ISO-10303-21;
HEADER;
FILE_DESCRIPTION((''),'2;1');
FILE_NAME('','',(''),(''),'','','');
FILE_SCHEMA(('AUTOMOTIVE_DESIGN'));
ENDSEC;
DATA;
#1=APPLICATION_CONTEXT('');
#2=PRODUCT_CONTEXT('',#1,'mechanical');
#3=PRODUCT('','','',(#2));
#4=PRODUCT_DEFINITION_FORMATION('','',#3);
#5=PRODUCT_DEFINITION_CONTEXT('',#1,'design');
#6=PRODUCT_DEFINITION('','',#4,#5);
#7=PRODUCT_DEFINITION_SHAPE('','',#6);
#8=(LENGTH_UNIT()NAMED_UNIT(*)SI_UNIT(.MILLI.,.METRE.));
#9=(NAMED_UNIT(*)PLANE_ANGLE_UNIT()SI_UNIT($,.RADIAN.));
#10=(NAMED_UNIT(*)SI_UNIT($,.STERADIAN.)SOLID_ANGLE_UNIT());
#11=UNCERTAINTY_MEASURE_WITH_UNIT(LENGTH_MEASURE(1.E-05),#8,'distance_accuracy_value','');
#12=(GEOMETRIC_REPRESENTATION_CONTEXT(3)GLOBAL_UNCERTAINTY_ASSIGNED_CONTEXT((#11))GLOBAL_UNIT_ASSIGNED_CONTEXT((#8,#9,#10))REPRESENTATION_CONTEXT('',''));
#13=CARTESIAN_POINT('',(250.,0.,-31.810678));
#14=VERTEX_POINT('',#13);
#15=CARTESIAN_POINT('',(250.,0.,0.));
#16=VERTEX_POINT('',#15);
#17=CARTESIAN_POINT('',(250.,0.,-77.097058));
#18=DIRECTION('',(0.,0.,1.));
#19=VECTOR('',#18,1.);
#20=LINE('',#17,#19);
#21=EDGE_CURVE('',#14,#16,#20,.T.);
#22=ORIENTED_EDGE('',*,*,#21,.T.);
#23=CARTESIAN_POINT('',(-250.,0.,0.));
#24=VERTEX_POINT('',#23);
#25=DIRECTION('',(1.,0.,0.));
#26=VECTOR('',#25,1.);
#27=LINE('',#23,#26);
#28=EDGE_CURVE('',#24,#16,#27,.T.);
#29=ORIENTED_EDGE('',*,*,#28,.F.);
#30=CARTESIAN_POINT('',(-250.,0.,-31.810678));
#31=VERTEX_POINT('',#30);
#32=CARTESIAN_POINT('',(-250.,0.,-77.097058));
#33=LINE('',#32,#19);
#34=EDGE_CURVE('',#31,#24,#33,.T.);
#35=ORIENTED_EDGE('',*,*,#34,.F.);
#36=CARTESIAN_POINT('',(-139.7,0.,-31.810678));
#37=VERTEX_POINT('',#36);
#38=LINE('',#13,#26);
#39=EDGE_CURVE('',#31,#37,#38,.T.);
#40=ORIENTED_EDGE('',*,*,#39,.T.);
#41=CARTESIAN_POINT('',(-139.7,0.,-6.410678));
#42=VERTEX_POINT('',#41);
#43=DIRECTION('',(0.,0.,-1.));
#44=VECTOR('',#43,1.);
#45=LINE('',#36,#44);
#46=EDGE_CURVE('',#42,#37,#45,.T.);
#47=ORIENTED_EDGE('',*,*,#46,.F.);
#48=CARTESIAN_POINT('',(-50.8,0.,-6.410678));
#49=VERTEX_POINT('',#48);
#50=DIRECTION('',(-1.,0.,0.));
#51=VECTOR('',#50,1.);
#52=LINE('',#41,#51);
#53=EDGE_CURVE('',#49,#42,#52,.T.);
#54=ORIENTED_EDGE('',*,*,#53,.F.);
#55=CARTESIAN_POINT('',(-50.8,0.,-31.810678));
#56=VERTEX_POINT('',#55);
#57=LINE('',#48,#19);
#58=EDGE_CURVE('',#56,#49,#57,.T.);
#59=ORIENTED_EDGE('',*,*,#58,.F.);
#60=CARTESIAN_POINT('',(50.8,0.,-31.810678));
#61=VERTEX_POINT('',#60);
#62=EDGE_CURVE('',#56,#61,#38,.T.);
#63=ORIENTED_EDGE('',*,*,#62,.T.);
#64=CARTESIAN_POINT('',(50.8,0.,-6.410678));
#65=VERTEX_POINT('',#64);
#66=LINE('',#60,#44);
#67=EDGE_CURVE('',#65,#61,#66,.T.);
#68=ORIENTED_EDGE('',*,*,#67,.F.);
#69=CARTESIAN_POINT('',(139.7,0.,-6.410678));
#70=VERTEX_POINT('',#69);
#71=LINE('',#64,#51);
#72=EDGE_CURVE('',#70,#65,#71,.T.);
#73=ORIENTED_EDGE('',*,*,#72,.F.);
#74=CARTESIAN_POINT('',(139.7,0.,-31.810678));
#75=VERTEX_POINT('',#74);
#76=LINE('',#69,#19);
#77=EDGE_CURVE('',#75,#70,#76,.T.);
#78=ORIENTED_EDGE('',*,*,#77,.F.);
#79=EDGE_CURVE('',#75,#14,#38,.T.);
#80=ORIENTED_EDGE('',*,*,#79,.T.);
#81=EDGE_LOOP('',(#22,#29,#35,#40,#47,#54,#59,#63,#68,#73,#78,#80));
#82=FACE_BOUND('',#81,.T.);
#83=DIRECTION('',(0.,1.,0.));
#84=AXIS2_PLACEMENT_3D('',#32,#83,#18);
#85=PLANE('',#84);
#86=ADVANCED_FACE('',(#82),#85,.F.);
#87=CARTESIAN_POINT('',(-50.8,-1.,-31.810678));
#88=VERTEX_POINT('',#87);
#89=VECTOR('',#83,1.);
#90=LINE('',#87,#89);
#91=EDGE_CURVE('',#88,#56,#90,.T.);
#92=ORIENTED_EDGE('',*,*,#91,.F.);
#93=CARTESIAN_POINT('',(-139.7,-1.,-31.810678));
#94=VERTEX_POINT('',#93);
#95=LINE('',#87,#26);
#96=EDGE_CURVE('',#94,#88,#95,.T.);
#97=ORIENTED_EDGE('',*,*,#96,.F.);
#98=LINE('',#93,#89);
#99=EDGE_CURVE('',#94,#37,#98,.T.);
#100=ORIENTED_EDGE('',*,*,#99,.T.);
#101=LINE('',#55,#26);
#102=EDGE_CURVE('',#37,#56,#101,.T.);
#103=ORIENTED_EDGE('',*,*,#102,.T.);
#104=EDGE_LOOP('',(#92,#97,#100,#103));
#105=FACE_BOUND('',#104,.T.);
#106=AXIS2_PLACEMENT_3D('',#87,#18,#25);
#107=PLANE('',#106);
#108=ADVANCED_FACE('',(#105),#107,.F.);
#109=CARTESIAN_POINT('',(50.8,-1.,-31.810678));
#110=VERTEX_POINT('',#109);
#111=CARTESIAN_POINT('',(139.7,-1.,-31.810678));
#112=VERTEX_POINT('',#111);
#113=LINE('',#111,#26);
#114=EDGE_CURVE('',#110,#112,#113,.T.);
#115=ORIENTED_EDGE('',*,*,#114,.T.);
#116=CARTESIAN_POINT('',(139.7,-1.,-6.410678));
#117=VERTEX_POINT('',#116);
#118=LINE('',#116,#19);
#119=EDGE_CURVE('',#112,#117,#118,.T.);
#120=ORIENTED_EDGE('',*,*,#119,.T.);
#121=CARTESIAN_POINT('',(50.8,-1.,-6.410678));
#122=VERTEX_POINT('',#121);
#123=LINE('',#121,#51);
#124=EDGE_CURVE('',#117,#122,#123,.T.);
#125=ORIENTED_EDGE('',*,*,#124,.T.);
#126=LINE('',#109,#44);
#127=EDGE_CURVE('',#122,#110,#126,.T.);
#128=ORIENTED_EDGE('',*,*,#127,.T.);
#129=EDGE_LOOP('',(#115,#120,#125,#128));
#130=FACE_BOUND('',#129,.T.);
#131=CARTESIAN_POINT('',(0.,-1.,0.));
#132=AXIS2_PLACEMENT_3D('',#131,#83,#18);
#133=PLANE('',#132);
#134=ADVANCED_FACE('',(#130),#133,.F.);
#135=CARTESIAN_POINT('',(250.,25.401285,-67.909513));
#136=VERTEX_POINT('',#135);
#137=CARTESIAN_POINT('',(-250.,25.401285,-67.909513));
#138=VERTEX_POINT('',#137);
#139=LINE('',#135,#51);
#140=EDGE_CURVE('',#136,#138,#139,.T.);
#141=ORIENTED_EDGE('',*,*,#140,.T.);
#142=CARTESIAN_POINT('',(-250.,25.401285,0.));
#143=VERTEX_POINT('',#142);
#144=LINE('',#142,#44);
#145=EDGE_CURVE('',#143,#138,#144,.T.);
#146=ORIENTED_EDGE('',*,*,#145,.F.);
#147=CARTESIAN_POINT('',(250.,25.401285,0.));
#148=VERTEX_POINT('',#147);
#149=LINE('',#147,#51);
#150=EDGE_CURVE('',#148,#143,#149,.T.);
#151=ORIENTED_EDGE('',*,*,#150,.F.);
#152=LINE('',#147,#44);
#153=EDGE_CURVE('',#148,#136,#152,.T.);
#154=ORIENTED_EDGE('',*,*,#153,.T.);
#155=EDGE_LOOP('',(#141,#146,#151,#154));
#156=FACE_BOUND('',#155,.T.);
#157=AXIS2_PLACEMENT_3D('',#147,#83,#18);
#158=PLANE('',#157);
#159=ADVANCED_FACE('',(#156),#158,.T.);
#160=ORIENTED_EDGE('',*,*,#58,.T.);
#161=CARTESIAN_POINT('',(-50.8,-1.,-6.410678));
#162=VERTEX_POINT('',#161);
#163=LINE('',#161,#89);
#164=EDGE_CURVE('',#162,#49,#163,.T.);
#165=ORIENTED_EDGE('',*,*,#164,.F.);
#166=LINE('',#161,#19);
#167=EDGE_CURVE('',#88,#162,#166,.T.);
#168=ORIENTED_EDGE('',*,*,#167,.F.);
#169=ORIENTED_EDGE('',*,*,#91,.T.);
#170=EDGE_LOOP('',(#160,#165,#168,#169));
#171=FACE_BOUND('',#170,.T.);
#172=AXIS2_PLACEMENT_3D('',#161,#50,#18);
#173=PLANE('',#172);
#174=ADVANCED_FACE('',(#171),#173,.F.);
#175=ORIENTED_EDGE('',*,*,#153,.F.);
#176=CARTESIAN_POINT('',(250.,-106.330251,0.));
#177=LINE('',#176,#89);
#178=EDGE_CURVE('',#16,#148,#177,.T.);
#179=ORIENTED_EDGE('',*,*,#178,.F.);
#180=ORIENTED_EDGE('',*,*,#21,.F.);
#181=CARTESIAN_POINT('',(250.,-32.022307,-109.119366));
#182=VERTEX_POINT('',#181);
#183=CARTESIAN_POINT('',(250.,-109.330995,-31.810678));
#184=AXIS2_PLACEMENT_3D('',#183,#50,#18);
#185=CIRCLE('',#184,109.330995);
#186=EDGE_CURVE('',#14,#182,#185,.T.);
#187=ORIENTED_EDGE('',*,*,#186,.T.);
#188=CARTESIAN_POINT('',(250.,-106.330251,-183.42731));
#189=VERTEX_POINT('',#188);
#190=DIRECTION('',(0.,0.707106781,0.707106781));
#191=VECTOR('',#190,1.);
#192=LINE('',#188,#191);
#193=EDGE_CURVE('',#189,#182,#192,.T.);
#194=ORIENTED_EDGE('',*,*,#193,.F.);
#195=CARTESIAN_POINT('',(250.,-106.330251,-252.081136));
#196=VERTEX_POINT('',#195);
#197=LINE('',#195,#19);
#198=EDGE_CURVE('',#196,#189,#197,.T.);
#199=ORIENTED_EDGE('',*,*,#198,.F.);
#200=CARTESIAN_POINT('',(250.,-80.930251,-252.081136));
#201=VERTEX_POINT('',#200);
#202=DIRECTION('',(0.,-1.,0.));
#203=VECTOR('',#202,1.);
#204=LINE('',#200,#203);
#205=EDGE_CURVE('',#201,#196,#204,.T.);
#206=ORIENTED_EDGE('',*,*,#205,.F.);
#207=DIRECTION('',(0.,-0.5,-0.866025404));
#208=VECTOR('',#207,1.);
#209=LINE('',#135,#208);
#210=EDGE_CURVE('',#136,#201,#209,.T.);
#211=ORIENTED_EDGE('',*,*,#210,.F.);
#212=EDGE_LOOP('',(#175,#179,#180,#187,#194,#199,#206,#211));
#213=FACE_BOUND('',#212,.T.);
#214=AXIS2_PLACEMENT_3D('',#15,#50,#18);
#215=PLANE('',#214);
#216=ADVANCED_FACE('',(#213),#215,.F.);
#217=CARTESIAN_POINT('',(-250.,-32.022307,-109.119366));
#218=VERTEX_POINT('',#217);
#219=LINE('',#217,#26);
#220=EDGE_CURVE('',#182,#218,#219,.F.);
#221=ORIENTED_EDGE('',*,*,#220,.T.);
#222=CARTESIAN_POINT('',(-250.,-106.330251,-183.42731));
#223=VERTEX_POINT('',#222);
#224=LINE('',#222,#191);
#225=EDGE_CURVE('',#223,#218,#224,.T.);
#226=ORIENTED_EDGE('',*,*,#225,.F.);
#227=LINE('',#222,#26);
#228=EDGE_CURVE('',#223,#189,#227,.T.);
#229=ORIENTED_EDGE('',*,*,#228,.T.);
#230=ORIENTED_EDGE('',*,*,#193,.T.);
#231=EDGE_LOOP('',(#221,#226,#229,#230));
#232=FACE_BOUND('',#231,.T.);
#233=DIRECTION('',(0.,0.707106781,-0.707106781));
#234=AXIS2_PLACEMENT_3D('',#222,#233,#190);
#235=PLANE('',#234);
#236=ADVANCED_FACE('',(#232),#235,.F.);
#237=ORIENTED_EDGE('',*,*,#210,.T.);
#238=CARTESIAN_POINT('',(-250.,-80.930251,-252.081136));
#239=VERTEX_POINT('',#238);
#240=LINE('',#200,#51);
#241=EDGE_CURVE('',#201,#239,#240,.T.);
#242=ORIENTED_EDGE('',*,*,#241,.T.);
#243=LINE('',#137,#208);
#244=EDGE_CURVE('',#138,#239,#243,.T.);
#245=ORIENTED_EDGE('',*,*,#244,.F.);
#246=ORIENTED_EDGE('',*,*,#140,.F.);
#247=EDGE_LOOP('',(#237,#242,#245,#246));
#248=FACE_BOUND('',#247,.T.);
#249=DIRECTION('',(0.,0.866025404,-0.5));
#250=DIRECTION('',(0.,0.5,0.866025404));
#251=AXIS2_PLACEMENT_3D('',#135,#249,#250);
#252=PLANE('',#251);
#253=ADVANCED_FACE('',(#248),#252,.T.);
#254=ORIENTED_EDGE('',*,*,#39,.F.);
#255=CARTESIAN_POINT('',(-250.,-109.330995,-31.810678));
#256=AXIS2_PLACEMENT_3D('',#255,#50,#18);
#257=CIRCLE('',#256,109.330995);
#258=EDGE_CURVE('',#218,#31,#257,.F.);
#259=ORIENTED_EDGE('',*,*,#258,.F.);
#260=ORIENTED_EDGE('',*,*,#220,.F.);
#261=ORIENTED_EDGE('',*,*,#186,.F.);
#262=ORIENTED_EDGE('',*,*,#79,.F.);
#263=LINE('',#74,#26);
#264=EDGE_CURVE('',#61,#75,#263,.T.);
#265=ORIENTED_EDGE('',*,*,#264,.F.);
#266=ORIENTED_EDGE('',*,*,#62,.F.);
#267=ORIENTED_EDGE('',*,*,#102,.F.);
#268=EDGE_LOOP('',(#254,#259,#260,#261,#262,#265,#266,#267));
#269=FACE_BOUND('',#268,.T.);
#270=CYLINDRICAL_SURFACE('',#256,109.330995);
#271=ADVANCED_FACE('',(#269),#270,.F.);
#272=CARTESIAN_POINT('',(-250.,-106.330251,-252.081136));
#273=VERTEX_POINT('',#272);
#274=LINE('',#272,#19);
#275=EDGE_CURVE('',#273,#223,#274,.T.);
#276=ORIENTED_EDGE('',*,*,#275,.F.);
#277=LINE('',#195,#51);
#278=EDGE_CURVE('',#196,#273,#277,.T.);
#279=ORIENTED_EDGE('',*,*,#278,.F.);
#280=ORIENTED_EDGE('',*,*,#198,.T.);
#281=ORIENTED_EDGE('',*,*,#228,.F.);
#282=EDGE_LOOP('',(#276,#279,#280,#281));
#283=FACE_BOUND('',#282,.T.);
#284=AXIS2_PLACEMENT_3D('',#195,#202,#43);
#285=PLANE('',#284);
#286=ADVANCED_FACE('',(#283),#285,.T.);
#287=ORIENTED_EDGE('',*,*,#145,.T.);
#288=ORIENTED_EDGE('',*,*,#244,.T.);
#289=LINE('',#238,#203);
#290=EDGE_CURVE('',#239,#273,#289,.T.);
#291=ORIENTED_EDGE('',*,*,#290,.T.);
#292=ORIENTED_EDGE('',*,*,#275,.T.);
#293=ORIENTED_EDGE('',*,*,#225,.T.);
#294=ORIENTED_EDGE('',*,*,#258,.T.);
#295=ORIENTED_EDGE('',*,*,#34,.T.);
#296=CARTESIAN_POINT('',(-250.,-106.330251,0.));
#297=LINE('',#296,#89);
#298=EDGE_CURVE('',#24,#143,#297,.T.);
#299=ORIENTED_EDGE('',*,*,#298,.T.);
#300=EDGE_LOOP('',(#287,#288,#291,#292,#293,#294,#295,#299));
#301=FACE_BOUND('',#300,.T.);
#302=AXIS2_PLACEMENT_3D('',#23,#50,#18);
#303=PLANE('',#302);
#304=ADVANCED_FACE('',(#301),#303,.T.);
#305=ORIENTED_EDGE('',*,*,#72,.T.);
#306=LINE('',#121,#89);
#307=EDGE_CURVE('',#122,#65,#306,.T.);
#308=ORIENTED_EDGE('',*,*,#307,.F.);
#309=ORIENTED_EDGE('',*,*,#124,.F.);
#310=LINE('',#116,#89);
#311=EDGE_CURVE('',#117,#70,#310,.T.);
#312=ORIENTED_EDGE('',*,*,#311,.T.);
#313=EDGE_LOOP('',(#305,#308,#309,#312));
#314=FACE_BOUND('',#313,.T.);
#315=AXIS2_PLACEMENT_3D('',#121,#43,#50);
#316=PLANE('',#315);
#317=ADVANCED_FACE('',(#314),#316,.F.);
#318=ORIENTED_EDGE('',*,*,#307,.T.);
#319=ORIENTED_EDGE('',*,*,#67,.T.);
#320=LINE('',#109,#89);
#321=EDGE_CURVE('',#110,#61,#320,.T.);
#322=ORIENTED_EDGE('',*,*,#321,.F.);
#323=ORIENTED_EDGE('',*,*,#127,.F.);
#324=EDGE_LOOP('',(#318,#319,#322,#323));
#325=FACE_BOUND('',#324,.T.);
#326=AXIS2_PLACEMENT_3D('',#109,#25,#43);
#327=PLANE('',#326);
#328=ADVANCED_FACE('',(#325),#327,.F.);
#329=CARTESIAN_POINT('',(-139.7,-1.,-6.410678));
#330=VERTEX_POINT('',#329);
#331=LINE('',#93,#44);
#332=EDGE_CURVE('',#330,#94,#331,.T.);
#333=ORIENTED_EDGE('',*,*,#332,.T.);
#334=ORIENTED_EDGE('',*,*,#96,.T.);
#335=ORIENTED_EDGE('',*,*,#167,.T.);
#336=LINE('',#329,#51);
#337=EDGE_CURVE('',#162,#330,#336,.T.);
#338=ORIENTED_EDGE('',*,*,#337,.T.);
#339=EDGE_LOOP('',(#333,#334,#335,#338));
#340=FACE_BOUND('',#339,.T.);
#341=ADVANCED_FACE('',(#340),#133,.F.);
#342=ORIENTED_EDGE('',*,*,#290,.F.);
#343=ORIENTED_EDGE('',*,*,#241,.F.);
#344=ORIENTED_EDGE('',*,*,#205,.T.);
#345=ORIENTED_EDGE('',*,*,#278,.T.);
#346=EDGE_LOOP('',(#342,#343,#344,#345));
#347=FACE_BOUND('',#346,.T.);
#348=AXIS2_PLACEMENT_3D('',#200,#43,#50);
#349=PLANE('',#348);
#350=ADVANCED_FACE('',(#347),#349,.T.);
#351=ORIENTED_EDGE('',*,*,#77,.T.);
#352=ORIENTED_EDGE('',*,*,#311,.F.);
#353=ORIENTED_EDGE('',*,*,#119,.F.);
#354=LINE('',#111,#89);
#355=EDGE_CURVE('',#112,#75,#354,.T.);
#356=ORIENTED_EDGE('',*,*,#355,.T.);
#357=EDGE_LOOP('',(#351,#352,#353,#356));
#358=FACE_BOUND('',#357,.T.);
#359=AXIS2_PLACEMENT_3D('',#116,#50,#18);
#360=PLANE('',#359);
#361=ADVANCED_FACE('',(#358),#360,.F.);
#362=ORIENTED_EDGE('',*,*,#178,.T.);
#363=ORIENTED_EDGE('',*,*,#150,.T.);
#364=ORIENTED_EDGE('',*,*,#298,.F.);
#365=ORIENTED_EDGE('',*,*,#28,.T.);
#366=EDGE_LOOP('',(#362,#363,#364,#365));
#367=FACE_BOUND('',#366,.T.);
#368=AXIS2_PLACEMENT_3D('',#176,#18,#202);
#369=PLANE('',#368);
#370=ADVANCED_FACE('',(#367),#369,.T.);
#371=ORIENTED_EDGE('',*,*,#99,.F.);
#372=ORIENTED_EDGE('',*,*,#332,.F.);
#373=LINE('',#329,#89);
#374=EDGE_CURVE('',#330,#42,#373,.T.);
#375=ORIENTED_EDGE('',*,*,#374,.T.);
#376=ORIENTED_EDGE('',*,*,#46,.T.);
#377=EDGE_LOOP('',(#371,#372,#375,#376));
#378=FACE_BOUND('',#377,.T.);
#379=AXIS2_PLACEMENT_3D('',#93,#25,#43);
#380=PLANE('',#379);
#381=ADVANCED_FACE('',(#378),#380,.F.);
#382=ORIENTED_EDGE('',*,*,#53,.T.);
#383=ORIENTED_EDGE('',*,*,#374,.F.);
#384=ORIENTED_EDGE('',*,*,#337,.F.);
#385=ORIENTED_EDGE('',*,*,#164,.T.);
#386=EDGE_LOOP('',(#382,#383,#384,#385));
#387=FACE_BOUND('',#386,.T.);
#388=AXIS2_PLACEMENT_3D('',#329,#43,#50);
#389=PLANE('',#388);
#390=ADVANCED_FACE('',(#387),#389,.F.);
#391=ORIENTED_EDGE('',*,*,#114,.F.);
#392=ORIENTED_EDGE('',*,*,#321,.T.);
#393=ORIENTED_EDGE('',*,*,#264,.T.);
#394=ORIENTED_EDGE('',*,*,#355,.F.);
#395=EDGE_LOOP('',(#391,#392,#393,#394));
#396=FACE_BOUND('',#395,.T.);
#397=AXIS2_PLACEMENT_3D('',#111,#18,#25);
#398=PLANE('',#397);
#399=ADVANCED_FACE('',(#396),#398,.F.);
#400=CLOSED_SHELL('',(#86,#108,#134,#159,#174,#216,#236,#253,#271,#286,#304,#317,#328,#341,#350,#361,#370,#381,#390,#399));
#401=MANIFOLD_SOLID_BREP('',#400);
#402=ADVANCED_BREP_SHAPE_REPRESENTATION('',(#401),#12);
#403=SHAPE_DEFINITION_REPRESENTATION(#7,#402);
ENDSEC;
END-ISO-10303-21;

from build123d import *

# Parameters (mm, degrees)
BOSS_EXTRUDE1_DEPTH = 500
CUT_EXTRUDE1_DEPTH  = 570.957034721
SKETCH3_W           = 88.9
SKETCH3_H           = 25.400000016
BOSS_EXTRUDE2_DEPTH = 1
SKETCH4_W           = 88.9
SKETCH4_H           = 25.40000001
BOSS_EXTRUDE3_DEPTH = 1
FILLET1_R           = 109.330995043


with BuildPart() as part:
    # Sketch1 → Boss-Extrude1 (new body)
    with BuildSketch(Plane(origin=(-250, 0, 0), x_dir=(0, -1, 0), z_dir=(-1, 0, 0))):
        Polygon((106.330251065, -252.08113602), (106.330251065, 0), (-25.401284991, 0), (-25.401284991, -67.909513139), (80.930251056, -252.08113602), align=None)
    extrude(amount=-BOSS_EXTRUDE1_DEPTH)

    # Sketch2 → Cut-Extrude1 (cut, through all)
    with BuildSketch(Plane(origin=(250, 0, 0), x_dir=(0, 0, -1), z_dir=(1, 0, 0))):
        Polygon((183.427309509, -106.33025104), (77.097058469, 0), (0, 0), (0, -106.33025104), align=None)
    extrude(amount=-CUT_EXTRUDE1_DEPTH, mode=Mode.SUBTRACT)

    # Sketch3 → Boss-Extrude2 (add)
    with BuildSketch(Plane.XZ):
        with Locations((-95.25, -19.110677533)):
            Rectangle(SKETCH3_W, SKETCH3_H)
    extrude(amount=BOSS_EXTRUDE2_DEPTH)

    # Sketch4 → Boss-Extrude3 (add)
    with BuildSketch(Plane.XZ):
        with Locations((95.25, -19.110677536)):
            Rectangle(SKETCH4_W, SKETCH4_H)
    extrude(amount=BOSS_EXTRUDE3_DEPTH)

    # Fillet1
    fillet1_edges = [part.edges().sort_by_distance(p)[0] for p in [
        (0, 0, -77.097058469),
    ]]
    fillet(fillet1_edges, radius=FILLET1_R - 0.0001)  # a hair under: the kernel refuses the full size


solid = part.part
